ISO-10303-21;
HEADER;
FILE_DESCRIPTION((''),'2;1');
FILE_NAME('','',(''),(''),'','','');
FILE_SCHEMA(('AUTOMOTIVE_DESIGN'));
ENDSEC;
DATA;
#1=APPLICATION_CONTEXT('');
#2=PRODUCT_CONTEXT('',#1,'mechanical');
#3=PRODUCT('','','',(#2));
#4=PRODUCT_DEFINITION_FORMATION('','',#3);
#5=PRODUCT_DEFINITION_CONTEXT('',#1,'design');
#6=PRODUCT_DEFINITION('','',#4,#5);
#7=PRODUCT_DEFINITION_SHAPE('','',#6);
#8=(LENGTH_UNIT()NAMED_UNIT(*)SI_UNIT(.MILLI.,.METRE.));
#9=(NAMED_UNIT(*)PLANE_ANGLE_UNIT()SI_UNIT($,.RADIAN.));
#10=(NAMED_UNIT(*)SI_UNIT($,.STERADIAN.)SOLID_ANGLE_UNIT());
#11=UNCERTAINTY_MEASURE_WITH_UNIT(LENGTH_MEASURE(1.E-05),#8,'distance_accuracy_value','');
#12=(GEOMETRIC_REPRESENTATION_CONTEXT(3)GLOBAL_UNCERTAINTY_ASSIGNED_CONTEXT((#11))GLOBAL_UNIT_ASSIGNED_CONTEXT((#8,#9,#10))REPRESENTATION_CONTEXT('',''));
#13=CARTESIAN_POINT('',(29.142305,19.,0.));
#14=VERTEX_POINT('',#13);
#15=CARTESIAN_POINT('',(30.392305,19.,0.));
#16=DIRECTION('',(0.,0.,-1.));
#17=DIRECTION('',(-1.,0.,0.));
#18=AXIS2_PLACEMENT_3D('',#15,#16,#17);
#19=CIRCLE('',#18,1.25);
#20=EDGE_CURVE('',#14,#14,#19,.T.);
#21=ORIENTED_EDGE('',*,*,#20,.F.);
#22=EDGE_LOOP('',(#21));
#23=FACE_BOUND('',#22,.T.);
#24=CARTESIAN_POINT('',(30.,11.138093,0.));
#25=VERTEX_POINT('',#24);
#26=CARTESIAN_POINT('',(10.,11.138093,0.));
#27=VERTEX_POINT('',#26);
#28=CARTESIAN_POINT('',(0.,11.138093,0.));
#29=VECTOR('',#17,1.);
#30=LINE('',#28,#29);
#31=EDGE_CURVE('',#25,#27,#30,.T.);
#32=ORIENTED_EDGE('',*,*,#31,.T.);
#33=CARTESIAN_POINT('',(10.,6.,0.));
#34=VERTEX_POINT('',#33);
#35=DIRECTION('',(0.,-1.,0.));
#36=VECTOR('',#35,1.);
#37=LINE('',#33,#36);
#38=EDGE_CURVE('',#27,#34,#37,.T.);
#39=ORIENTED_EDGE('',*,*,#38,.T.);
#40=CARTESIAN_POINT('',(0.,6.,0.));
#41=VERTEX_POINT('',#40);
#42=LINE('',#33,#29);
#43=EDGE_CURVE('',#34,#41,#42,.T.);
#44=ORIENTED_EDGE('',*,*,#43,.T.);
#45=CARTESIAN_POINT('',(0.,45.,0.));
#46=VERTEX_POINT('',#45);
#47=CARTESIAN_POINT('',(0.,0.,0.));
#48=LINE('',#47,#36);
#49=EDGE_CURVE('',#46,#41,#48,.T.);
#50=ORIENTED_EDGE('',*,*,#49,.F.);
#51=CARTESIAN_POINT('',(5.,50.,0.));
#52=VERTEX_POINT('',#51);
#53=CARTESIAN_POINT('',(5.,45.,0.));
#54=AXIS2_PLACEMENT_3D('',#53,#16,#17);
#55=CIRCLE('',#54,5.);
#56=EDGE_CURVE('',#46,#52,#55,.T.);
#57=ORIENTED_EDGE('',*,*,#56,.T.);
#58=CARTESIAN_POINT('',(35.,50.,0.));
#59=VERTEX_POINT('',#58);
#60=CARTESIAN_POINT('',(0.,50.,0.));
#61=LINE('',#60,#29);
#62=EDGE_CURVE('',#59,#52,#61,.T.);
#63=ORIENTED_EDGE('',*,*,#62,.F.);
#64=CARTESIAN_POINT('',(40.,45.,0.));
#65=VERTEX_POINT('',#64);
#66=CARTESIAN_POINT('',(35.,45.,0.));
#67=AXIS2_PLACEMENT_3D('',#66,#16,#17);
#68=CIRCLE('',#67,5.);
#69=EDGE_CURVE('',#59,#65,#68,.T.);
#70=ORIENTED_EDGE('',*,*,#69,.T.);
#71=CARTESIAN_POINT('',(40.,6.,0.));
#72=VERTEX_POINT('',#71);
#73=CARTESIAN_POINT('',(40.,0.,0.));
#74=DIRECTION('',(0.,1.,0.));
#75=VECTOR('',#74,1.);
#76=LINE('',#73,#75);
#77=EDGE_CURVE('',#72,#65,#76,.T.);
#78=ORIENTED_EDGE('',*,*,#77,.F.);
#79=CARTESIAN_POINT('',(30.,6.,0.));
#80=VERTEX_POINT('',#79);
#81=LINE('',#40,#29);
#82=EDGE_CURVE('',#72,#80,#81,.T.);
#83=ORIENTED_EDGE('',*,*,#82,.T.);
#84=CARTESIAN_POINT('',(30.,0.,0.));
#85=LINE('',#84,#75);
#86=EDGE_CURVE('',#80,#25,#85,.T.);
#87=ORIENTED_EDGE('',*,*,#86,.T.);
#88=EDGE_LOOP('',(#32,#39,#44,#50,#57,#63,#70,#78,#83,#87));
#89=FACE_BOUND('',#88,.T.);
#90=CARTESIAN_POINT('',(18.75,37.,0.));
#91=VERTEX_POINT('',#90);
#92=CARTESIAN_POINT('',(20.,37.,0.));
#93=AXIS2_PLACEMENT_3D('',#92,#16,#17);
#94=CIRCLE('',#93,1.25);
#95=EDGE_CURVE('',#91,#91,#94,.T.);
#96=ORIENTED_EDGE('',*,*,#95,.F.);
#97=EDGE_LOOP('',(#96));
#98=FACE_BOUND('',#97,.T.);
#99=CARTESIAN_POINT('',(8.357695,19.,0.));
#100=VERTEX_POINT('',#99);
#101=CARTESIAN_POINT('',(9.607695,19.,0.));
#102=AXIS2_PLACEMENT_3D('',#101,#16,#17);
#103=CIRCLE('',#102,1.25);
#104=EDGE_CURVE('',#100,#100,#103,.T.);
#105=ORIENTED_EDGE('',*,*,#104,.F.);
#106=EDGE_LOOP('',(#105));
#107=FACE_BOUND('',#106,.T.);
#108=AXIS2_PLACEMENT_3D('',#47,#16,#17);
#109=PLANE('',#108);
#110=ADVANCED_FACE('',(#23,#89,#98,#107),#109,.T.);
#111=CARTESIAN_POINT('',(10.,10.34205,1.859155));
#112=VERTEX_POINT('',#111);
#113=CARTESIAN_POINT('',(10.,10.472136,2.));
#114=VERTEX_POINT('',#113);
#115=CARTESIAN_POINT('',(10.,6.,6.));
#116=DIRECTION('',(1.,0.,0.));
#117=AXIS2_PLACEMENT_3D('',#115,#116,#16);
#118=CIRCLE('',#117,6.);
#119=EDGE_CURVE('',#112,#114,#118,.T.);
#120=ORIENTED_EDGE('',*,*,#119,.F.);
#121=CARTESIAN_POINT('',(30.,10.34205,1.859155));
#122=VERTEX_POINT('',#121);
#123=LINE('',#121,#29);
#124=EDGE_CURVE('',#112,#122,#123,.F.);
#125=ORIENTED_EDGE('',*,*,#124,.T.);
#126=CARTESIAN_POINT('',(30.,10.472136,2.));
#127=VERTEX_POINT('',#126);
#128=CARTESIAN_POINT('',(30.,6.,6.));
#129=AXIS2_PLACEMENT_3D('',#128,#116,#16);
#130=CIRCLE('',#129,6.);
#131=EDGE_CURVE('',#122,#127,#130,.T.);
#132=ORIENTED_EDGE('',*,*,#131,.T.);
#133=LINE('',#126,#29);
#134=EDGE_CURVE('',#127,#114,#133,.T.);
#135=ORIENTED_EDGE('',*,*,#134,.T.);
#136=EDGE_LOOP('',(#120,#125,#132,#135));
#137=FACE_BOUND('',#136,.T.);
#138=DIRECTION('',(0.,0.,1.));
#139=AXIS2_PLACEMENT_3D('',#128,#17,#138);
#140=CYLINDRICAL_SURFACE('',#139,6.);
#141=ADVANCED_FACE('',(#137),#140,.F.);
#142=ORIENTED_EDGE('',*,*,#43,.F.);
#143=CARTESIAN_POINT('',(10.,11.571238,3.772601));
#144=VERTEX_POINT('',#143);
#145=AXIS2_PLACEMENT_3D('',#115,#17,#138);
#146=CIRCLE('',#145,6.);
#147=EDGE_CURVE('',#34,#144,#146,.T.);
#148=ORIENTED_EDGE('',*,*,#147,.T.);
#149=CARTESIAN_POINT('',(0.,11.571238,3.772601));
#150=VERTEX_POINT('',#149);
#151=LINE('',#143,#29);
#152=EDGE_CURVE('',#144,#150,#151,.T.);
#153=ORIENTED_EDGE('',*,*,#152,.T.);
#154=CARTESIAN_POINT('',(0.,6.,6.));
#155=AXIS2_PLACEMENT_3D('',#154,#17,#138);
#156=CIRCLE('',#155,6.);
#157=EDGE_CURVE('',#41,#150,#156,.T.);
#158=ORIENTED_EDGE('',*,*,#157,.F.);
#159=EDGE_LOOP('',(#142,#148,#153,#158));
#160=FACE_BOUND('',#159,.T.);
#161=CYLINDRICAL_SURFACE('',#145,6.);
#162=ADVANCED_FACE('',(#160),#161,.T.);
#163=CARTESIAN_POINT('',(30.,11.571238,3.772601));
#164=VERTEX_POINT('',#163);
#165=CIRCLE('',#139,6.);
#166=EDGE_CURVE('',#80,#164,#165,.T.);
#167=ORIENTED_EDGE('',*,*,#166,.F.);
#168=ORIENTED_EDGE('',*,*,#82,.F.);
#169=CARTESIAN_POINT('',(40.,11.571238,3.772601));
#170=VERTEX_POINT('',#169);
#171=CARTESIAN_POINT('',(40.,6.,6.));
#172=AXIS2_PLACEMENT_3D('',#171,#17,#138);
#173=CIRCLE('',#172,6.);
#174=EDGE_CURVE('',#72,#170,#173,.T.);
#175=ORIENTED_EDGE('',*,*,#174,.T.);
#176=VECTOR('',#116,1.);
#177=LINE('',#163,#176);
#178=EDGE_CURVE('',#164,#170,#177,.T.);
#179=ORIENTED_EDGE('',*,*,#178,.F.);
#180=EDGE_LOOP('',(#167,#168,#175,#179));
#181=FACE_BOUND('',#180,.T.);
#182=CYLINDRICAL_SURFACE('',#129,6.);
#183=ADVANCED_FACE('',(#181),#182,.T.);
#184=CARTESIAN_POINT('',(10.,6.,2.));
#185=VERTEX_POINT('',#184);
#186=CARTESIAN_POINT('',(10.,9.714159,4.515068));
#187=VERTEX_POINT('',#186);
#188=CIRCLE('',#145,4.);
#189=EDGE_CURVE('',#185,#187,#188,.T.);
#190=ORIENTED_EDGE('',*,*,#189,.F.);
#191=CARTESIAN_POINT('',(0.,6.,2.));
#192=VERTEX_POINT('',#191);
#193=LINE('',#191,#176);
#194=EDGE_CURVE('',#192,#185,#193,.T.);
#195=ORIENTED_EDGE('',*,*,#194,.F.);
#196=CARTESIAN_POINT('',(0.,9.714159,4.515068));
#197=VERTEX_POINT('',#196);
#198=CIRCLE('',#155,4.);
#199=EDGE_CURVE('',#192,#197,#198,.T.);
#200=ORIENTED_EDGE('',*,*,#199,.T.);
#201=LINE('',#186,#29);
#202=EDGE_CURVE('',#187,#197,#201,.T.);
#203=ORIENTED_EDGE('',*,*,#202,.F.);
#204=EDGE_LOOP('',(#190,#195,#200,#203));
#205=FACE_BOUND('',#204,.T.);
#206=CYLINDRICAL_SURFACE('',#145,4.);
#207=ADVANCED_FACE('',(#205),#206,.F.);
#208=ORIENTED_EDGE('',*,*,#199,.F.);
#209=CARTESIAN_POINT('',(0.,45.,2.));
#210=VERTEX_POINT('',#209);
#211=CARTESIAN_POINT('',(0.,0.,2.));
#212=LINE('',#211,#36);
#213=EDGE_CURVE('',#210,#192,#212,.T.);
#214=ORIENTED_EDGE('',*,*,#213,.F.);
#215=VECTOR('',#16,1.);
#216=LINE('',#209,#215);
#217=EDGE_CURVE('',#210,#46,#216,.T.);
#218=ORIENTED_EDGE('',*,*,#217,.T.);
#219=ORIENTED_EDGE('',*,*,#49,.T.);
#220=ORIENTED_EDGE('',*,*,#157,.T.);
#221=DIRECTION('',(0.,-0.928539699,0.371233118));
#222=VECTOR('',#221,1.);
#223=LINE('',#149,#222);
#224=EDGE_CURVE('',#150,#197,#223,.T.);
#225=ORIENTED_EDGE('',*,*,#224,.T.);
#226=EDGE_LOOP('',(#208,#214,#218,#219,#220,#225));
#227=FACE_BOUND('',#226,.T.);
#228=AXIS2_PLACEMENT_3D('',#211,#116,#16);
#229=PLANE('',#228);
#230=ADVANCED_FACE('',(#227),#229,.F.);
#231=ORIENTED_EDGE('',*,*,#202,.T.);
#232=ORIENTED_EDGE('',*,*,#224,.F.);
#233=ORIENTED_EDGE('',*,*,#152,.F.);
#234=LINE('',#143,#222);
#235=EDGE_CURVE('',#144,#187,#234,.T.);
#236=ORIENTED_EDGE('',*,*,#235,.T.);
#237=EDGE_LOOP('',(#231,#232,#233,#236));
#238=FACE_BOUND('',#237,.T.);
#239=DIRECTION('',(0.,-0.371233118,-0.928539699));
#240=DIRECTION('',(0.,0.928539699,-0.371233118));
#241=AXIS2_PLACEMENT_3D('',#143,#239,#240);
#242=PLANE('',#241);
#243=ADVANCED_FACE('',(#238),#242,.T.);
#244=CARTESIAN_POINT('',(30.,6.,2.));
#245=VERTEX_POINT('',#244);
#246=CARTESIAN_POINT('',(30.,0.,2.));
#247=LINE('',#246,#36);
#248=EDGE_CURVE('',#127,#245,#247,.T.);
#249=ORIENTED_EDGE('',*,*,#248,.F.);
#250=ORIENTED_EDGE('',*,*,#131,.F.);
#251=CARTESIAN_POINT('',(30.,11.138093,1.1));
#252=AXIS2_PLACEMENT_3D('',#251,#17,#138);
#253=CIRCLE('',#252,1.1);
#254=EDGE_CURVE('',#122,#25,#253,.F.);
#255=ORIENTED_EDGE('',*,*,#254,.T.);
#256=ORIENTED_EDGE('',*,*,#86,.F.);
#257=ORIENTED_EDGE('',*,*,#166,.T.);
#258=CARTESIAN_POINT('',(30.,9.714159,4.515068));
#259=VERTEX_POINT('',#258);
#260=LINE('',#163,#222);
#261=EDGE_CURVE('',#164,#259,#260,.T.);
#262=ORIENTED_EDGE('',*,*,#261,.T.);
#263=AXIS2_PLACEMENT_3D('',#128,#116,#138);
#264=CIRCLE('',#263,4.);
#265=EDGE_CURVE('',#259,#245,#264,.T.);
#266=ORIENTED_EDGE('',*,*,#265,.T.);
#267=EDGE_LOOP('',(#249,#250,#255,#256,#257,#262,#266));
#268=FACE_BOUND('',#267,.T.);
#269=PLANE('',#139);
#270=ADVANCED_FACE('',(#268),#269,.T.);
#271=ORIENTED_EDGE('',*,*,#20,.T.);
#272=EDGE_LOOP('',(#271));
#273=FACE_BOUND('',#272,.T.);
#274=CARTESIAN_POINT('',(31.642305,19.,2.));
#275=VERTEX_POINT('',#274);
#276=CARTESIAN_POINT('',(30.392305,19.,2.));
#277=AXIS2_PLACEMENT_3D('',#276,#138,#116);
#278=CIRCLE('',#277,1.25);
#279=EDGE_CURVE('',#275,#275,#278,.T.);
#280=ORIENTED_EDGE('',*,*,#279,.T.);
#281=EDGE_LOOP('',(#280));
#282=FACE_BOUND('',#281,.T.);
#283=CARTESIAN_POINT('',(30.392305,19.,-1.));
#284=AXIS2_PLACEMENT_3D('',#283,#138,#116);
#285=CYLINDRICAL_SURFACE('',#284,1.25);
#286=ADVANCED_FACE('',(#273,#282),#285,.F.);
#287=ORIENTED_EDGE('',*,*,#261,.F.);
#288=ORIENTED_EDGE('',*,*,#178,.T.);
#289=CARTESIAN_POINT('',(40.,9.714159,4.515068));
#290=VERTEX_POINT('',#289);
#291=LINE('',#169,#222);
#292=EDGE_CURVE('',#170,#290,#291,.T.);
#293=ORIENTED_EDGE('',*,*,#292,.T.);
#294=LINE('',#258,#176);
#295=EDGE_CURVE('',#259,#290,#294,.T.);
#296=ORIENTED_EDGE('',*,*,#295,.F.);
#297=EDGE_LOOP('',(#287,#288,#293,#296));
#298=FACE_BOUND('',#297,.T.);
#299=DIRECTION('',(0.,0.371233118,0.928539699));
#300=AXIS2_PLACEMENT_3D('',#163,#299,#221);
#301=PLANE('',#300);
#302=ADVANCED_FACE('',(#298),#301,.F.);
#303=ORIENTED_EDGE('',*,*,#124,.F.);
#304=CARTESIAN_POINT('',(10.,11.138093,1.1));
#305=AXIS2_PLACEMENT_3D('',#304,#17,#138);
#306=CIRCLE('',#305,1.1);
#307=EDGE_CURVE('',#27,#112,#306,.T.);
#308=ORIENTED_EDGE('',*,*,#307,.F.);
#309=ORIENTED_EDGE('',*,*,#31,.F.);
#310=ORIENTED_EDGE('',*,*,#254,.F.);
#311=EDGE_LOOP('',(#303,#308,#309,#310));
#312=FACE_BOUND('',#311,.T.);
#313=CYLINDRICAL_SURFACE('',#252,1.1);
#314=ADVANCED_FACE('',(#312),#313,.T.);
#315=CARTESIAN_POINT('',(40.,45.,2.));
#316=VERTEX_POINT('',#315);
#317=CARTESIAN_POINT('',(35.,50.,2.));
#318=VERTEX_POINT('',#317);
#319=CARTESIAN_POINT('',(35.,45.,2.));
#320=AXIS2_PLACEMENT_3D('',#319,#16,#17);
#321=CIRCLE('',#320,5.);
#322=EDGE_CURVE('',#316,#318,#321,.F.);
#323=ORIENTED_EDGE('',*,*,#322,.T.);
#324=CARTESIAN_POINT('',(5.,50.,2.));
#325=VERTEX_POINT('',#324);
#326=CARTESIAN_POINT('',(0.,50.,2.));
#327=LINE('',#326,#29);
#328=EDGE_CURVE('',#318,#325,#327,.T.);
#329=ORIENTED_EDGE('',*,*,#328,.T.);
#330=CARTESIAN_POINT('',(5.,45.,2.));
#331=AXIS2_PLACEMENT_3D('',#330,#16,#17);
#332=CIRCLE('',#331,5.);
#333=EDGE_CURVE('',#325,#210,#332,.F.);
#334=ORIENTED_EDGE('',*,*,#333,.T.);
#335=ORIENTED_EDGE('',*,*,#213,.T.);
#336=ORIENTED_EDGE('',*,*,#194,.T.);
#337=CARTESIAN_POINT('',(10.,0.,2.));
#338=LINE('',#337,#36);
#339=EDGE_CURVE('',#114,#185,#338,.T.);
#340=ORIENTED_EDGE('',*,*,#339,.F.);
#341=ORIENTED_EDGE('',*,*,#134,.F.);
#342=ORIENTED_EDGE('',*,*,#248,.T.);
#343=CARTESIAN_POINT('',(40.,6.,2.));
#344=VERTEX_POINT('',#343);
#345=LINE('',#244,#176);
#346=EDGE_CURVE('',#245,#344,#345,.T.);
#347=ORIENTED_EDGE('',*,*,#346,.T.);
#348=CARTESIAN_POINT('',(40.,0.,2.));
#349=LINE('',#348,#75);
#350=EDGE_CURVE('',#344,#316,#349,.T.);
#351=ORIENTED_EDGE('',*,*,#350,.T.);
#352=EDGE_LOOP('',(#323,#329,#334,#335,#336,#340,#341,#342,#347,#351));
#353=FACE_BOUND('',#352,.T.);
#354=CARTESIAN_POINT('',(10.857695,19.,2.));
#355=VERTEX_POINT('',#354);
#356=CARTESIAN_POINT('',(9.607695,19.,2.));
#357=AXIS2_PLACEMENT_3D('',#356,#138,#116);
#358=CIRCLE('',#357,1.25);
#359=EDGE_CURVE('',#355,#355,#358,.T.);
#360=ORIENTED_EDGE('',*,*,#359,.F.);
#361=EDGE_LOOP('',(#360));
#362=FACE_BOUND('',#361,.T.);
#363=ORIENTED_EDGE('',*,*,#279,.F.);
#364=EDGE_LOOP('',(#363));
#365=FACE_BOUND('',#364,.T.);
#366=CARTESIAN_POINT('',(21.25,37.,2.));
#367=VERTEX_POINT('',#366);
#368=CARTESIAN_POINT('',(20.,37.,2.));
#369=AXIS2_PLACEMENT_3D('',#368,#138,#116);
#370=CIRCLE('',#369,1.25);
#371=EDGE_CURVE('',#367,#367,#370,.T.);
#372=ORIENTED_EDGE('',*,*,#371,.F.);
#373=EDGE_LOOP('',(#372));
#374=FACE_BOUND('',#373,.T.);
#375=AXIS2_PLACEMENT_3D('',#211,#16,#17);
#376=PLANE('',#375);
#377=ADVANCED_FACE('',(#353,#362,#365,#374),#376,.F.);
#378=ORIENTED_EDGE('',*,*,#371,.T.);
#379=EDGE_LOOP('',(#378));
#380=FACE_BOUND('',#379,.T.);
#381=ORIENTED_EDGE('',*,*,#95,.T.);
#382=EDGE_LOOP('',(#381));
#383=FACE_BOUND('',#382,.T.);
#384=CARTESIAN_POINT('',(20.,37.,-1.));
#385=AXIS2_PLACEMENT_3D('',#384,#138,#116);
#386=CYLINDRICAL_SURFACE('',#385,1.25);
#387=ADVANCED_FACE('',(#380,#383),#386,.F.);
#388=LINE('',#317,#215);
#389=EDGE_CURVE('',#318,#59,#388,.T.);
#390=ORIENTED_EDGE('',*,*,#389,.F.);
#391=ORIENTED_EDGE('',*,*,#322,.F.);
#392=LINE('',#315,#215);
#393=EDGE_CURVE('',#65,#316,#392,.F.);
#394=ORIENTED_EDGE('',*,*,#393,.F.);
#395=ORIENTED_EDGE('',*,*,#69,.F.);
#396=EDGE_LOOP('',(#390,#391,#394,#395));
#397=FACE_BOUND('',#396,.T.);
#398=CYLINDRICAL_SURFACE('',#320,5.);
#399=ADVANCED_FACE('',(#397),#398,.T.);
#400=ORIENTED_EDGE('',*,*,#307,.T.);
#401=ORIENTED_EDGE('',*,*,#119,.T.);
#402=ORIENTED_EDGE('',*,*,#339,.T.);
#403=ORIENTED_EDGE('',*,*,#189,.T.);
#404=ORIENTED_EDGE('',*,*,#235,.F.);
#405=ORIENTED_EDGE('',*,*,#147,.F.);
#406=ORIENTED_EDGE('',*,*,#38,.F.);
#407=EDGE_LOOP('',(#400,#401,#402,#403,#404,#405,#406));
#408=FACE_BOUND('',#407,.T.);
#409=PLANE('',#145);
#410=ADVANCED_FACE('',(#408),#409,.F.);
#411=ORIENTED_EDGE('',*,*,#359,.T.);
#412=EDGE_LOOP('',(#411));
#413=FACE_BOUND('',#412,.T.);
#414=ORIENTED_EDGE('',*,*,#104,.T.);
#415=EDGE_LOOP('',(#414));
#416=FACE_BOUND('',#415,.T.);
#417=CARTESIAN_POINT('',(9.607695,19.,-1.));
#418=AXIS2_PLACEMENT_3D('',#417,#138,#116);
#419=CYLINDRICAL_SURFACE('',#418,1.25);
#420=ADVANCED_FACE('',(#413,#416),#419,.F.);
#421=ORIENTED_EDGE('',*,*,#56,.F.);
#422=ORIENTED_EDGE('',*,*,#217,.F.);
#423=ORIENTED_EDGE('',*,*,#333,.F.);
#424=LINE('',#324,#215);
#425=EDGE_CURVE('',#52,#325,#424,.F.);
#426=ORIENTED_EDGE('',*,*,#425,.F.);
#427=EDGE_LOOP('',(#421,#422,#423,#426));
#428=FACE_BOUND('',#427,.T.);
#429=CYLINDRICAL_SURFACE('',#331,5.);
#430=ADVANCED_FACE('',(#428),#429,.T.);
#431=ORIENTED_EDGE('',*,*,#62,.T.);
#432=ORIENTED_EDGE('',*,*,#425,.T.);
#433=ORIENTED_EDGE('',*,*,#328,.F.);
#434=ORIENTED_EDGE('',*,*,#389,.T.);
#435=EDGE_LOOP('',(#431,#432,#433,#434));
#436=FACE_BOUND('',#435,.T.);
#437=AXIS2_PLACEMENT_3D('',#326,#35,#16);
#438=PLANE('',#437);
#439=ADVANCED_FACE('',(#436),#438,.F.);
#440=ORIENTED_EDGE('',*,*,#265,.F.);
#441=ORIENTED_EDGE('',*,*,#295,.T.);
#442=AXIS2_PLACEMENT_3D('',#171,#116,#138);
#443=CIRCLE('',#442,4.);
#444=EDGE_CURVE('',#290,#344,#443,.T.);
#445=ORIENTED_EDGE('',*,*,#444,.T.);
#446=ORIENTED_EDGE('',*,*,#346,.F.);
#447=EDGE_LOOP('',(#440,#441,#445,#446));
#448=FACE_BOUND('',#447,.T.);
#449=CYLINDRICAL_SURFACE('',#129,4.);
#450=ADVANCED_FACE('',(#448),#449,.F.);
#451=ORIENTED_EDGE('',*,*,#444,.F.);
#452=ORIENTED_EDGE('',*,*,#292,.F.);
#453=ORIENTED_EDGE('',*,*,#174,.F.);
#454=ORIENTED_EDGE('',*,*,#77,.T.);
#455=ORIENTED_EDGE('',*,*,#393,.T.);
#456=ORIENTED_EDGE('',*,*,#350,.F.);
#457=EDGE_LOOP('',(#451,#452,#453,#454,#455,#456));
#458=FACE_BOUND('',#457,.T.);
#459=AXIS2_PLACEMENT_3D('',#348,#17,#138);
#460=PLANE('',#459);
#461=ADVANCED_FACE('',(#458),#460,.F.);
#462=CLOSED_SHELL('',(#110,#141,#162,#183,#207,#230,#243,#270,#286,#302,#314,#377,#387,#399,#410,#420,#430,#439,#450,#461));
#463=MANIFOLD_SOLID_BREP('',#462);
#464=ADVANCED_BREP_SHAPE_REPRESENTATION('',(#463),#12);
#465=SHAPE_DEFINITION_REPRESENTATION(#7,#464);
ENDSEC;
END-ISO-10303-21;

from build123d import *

# Parameters (mm, degrees)
SKETCH1_W           = 40
SKETCH1_H           = 50
BOSS_EXTRUDE1_DEPTH = 2
FILLET1_R           = 5
SKETCH2_R           = 1.25
CUT_EXTRUDE1_DEPTH  = 3
SKETCH3_W           = 40
SKETCH3_H           = 6
CUT_EXTRUDE3_DEPTH  = 3
BOSS_EXTRUDE2_DEPTH = 10
BOSS_EXTRUDE3_START = 10
BOSS_EXTRUDE3_DEPTH = 10
SKETCH7_R           = 6
CUT_EXTRUDE4_DEPTH  = 20
FILLET2_START       = 10
FILLET2_DEPTH       = 20


with BuildPart() as part:
    # Sketch1 → Boss-Extrude1 (new body)
    with BuildSketch(Plane.XY):
        with Locations((20, 25)):
            Rectangle(SKETCH1_W, SKETCH1_H)
    extrude(amount=BOSS_EXTRUDE1_DEPTH)

    # Fillet1
    fillet1_edges = [part.edges().sort_by_distance(p)[0] for p in [
        (0, 50, 1),
        (40, 50, 1),
    ]]
    fillet(fillet1_edges, radius=FILLET1_R)

    # Sketch2 → Cut-Extrude1 (cut)
    with BuildSketch(Plane.XY.offset(2)):
        with Locations((30.392304845, 19)):
            Circle(SKETCH2_R)
        with Locations((9.607695155, 19)):
            Circle(SKETCH2_R)
        with BuildLine():
            ThreePointArc((21.25, 37), (20.883883476, 37.883883476), (20, 38.25))
            Line((20, 38.25), (20, 35.75))
            ThreePointArc((20, 35.75), (20.883883476, 36.116116524), (21.25, 37))
        make_face()
        with BuildLine():
            Line((20, 35.75), (20, 38.25))
            ThreePointArc((20, 38.25), (18.75, 37), (20, 35.75))
        make_face()
    extrude(amount=-CUT_EXTRUDE1_DEPTH, mode=Mode.SUBTRACT)

    # Sketch3 → Cut-Extrude3 (cut)
    with BuildSketch(Plane.XY.offset(2)):
        with Locations((20, 3)):
            Rectangle(SKETCH3_W, SKETCH3_H)
    extrude(amount=-CUT_EXTRUDE3_DEPTH, mode=Mode.SUBTRACT)

    # Sketch5 → Boss-Extrude2 (add)
    with BuildSketch(Plane.ZY):
        with BuildLine():
            Line((3.77260129, 11.571238192), (4.515067527, 9.714158794))
            ThreePointArc((4.515067527, 9.714158794), (8.242796258, 9.312078644), (10, 6))
            ThreePointArc((10, 6), (6, 2), (2, 6))
            Line((2, 6), (0, 6))
            ThreePointArc((0, 6), (6, 0), (12, 6))
            ThreePointArc((12, 6), (9.364194387, 10.968117966), (3.77260129, 11.571238192))
        make_face()
    extrude(amount=-BOSS_EXTRUDE2_DEPTH)

    # Sketch6 → Boss-Extrude3 (add)
    with BuildSketch(Plane(origin=(40, 0, -40), x_dir=(0, 0, 1), z_dir=(-1, 0, 0)).offset(BOSS_EXTRUDE3_START)):
        with BuildLine():
            Line((43.77260129, 11.571238192), (44.515067527, 9.714158794))
            ThreePointArc((44.515067527, 9.714158794), (48.242796258, 9.312078644), (50, 6))
            ThreePointArc((50, 6), (46, 2), (42, 6))
            Line((42, 6), (40, 6))
            ThreePointArc((40, 6), (46, 0), (52, 6))
            ThreePointArc((52, 6), (49.364194387, 10.968117966), (43.77260129, 11.571238192))
        make_face()
    extrude(amount=-BOSS_EXTRUDE3_DEPTH)

    # Sketch7 → Cut-Extrude4 (cut)
    with BuildSketch(Plane(origin=(10, 0, 0), x_dir=(0, 0, -1), z_dir=(1, 0, 0))):
        with Locations((-6, 6)):
            Circle(SKETCH7_R)
    extrude(amount=CUT_EXTRUDE4_DEPTH, mode=Mode.SUBTRACT)

    # Fillet2: read off the stored shape, not the designer's step
    # Fillet2 outline → Fillet2 (cut)
    with BuildSketch(Plane.YZ.offset(FILLET2_START)):
        with BuildLine():
            Line((6, 0), (11.138093031, 0))
            ThreePointArc((11.138093031, 0), (10.1268882, 0.667027959), (10.342050449, 1.85915493))
            ThreePointArc((10.342050449, 1.85915493), (8.361665681, 0.484337283), (6, 0))
        make_face()
    extrude(amount=FILLET2_DEPTH, mode=Mode.SUBTRACT)


solid = part.part
